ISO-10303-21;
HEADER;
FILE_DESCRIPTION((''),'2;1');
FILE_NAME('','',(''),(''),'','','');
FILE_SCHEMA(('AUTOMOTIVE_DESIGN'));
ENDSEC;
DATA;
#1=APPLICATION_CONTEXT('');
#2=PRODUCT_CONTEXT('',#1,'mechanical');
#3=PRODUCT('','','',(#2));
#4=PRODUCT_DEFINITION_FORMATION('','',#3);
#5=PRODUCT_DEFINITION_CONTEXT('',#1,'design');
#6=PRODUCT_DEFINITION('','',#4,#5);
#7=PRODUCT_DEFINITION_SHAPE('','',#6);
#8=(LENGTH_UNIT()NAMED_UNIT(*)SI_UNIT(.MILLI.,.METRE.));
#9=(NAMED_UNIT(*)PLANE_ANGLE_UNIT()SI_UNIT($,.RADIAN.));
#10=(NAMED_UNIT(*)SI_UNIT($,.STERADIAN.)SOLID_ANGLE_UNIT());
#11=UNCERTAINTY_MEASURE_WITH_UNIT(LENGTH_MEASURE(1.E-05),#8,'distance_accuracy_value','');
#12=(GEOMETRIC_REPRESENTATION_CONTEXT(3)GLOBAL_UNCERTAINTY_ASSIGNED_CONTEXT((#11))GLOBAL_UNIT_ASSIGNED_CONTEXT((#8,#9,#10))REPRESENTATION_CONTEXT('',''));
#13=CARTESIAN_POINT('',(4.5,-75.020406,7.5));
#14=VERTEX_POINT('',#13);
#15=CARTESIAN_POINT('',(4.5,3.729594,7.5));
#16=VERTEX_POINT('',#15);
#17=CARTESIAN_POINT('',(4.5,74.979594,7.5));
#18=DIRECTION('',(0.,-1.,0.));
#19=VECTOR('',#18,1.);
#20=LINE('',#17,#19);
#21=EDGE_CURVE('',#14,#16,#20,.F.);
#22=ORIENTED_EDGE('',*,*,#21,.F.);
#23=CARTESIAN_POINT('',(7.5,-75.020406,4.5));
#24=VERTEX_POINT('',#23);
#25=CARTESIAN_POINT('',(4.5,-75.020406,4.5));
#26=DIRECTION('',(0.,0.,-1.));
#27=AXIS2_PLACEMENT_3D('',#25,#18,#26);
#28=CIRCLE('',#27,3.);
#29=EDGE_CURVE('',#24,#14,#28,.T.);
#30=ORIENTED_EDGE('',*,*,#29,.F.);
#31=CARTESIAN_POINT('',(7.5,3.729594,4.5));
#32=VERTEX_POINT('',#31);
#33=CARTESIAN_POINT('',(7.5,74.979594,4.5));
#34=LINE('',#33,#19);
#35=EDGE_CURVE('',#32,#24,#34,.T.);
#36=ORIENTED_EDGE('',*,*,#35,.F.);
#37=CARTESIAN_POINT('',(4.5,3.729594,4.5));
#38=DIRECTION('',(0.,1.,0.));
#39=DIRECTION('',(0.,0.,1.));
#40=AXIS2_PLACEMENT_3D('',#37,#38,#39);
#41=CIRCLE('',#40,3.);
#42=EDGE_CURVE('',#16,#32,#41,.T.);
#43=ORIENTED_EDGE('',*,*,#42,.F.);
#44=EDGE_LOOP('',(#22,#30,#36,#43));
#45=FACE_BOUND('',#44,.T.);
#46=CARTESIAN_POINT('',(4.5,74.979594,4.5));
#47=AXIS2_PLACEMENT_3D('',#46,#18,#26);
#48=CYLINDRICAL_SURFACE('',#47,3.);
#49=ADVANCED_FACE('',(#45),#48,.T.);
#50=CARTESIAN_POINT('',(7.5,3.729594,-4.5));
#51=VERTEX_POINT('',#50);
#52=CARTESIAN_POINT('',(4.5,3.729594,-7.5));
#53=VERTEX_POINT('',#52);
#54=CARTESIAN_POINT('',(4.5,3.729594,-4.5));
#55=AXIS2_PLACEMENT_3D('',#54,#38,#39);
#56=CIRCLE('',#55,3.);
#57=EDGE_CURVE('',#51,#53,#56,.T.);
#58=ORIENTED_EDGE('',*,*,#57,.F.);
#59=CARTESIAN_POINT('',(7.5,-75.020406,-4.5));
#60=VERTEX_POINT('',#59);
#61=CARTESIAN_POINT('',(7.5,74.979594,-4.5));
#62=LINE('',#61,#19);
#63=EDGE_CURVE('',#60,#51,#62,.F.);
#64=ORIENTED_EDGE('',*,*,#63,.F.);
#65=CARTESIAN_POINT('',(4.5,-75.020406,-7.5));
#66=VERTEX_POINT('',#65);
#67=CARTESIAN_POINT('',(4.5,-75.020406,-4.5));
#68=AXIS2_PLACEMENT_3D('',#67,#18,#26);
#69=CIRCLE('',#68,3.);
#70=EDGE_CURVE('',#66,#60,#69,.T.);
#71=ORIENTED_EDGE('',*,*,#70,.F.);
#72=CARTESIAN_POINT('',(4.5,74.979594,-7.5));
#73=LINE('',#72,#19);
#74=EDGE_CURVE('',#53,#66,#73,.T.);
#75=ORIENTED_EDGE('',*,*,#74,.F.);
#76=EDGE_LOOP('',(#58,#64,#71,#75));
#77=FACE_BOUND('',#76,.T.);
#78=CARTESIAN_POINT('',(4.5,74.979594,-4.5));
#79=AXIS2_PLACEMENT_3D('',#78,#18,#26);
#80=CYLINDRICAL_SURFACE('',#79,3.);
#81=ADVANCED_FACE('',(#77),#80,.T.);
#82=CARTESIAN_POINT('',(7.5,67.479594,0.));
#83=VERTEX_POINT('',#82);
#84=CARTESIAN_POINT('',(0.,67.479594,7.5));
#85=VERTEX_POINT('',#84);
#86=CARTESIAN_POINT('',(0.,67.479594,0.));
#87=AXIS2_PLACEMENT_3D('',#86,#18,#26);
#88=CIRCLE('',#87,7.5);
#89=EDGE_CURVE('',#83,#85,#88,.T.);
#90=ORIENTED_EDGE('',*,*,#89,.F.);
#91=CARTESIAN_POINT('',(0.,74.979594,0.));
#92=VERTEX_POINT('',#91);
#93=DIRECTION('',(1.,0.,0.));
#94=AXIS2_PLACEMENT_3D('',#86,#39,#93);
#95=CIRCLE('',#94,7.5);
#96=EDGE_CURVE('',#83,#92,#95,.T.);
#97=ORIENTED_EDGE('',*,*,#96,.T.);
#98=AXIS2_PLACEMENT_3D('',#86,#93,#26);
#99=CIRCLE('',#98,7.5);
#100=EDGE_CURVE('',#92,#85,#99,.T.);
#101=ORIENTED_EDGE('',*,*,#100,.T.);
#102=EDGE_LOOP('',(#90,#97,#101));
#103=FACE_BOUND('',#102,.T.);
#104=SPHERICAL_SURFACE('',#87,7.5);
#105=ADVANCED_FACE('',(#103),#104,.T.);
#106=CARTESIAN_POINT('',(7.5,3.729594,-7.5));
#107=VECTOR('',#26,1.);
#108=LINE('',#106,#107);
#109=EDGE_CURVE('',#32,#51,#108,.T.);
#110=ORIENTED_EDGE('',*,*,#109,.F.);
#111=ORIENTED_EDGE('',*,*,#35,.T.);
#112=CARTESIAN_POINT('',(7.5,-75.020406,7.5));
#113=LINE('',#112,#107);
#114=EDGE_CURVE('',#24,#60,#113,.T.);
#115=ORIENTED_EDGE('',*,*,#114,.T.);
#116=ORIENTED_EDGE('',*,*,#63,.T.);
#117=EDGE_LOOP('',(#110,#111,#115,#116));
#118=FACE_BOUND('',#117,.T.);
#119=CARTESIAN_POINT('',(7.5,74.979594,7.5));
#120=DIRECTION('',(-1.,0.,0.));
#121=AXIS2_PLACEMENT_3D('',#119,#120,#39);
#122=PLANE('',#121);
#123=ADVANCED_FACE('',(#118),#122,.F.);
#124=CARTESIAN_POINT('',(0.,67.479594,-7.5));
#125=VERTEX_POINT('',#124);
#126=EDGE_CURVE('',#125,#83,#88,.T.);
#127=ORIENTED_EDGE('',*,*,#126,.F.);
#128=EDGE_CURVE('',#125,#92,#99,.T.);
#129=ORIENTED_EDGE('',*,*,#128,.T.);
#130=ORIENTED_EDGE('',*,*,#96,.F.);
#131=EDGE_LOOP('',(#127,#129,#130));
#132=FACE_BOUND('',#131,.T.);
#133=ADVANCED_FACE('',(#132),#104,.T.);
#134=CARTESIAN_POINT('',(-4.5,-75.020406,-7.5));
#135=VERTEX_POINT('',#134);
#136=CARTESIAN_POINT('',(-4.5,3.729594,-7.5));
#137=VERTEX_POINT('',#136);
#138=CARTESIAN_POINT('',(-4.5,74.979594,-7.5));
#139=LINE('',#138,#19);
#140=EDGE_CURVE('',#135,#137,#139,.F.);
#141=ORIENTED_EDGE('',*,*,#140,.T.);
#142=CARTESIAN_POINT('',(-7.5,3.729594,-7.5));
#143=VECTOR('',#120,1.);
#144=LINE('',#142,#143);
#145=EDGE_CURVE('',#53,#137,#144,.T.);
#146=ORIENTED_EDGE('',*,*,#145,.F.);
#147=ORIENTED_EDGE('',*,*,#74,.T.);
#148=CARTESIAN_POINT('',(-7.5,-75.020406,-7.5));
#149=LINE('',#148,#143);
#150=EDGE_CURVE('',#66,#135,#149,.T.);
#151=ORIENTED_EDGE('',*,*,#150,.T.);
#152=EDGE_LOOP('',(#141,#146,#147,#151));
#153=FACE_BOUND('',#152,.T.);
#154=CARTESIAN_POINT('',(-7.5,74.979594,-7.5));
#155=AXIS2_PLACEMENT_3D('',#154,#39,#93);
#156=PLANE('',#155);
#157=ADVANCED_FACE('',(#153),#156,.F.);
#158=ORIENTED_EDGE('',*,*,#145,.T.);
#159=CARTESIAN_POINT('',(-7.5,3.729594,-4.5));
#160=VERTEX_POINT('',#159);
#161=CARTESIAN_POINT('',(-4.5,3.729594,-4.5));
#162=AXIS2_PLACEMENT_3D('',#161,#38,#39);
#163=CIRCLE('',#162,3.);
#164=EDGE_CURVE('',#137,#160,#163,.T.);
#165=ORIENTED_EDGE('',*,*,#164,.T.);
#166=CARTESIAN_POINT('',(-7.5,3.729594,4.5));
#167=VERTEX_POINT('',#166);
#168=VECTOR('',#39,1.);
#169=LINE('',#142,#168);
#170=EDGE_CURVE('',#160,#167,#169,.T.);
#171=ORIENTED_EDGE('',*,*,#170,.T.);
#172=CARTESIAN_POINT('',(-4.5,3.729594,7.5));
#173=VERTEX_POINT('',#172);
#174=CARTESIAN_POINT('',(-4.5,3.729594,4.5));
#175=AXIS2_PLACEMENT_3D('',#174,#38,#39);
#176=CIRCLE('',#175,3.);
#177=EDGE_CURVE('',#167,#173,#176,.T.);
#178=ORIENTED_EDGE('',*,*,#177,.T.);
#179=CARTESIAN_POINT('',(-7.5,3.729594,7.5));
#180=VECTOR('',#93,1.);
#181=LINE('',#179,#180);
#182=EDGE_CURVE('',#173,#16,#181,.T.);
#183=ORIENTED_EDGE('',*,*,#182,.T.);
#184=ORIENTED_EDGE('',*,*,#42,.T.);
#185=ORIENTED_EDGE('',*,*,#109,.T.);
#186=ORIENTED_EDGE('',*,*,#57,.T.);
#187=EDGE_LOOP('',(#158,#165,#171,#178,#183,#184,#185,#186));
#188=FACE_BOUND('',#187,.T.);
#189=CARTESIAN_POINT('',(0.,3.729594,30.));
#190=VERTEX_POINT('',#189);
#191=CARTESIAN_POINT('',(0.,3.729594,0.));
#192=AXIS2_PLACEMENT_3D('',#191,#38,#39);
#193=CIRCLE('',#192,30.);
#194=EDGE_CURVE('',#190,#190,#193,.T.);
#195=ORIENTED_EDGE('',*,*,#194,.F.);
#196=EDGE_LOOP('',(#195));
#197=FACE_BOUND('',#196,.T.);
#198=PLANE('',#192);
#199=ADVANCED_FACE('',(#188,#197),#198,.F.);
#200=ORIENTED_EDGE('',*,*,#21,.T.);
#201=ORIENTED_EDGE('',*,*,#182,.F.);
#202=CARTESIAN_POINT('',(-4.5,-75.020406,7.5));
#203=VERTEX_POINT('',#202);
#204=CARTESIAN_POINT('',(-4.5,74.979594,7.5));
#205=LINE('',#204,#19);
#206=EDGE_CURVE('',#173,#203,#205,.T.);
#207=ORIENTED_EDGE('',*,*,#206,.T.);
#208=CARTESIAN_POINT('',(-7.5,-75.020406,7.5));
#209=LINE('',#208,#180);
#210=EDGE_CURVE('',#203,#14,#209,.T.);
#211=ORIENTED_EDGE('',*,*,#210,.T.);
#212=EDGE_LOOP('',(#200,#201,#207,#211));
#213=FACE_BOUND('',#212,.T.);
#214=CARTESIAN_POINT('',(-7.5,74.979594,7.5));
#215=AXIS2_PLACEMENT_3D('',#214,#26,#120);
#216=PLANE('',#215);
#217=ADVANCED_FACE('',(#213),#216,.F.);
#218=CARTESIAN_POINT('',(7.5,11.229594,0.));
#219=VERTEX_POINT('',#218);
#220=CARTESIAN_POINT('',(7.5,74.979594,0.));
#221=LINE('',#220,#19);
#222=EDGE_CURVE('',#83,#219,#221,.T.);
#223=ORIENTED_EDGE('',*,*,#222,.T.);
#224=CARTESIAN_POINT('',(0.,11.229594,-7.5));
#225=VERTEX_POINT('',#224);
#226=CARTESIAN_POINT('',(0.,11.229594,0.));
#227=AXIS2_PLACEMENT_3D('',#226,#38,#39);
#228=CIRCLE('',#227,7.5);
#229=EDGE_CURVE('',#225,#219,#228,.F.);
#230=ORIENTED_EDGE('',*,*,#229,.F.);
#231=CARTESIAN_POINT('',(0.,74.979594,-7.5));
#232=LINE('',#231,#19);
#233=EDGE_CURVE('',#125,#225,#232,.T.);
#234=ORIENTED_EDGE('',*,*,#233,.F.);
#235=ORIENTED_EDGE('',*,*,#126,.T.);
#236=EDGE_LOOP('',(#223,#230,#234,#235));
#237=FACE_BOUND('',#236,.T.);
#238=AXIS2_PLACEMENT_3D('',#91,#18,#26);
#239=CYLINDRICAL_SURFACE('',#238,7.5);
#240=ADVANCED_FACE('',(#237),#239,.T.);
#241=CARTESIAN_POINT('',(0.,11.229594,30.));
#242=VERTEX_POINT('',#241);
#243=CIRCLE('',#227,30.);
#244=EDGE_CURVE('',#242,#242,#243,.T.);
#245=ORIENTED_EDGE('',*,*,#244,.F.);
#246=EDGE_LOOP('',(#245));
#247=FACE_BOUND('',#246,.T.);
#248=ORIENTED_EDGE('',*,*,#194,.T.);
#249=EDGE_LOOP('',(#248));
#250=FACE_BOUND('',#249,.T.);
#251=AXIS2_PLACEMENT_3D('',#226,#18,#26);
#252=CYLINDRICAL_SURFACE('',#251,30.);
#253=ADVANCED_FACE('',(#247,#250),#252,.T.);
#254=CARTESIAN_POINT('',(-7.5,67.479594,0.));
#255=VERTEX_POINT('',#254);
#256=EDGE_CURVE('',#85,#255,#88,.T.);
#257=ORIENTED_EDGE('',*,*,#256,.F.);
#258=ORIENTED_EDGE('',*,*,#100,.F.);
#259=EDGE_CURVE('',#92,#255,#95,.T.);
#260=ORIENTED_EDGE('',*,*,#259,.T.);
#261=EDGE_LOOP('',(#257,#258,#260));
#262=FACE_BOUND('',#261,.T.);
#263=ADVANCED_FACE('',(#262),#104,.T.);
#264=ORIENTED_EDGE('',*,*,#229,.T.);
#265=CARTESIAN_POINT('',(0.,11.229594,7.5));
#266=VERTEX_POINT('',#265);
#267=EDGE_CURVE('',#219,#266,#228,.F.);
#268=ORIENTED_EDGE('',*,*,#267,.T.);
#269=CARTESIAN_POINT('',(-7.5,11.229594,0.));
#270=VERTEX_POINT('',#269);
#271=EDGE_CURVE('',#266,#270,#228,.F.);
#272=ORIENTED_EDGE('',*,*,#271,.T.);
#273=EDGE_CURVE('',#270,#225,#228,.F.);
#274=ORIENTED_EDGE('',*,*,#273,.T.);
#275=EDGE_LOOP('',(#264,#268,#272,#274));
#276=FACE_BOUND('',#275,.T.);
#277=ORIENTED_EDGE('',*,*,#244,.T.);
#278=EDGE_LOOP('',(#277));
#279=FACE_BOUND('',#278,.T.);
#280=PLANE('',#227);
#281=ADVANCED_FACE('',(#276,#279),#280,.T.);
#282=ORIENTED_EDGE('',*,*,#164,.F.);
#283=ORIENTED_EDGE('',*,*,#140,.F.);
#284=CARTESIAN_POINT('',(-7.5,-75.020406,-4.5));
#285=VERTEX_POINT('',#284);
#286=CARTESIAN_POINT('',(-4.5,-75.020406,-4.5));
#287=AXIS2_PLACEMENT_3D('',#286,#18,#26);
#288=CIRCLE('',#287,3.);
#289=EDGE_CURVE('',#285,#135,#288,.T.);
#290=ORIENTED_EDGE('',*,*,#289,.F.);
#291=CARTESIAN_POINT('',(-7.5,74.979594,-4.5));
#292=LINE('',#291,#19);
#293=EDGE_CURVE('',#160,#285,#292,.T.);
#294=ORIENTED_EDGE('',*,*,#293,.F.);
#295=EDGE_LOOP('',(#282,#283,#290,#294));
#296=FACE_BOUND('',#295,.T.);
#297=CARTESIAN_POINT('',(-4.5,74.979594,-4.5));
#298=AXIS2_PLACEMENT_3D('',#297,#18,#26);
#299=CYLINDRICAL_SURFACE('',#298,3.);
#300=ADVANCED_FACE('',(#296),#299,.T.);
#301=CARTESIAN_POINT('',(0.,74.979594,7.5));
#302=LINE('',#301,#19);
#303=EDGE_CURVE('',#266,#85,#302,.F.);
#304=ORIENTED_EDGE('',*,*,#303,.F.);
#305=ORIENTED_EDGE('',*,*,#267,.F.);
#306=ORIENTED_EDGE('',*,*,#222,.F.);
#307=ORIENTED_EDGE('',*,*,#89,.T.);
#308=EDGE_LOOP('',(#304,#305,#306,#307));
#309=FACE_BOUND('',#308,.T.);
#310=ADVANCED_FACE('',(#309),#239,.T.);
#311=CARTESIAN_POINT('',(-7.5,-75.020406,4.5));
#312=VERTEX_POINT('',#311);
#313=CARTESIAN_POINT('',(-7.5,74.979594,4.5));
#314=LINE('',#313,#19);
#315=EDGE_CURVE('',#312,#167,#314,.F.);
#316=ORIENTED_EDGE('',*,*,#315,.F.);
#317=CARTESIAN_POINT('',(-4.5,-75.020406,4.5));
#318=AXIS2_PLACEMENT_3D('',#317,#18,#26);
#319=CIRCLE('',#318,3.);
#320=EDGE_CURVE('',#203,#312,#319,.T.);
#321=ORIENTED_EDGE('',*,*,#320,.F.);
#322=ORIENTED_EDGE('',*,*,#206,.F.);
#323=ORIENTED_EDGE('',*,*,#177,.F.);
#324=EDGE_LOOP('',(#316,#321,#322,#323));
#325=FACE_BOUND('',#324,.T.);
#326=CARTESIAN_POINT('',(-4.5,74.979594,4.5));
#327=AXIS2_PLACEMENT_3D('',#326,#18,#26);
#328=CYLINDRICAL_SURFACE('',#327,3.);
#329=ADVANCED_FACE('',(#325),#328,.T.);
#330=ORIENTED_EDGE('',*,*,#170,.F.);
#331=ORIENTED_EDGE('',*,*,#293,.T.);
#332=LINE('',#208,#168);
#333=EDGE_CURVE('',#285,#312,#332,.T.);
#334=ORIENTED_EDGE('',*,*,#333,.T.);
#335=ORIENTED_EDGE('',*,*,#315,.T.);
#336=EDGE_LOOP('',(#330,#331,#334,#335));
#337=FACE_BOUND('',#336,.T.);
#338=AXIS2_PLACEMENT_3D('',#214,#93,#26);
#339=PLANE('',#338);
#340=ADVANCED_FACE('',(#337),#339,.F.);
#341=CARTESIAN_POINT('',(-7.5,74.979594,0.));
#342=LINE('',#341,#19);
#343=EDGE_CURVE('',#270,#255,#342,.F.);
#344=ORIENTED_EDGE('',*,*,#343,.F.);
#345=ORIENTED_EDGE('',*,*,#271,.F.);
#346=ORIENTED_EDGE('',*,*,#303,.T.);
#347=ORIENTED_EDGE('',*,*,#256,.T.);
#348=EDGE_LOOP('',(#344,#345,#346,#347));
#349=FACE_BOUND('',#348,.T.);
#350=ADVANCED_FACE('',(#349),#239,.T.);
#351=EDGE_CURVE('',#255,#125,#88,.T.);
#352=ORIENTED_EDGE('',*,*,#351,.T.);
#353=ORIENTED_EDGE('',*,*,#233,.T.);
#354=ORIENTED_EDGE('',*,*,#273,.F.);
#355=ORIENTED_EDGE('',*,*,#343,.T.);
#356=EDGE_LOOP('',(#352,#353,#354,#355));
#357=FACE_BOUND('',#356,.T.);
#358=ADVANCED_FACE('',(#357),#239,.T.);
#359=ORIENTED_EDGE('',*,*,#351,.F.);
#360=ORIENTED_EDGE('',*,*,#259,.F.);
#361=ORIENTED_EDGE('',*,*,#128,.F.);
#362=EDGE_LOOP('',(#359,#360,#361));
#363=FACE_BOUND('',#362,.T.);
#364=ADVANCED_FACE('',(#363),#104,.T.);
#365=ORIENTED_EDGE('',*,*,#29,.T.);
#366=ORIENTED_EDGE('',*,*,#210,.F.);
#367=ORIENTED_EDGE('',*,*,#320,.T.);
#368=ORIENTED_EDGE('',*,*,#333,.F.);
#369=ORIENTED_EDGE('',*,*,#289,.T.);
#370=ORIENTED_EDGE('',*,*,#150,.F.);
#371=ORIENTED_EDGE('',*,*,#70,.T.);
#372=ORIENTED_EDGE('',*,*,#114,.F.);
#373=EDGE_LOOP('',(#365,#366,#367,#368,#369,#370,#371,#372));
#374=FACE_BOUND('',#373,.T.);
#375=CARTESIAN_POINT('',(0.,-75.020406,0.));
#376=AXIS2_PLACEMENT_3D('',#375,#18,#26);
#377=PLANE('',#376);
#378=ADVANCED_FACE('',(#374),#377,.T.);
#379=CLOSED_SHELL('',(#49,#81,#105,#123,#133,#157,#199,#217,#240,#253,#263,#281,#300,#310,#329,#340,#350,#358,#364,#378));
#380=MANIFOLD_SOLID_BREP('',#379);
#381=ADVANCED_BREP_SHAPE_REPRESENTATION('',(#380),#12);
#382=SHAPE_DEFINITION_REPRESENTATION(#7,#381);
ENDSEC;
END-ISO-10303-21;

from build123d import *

# Parameters (mm, degrees)
SKETCH1_W           = 10
SKETCH1_H           = 10
BOSS_EXTRUDE1_DEPTH = 50
BOSS_EXTRUDE2_START = -45
SKETCH2_R           = 20
BOSS_EXTRUDE2_DEPTH = 2.5
FILLET2_R           = 2
FILLET3_R           = 5
FILLET4_R           = 5
SCALE1_SCALE        = 1.5


with BuildPart() as part:
    # Sketch1 → Boss-Extrude1 (new, symmetric)
    with BuildSketch(Plane(origin=(0, 0, 0), x_dir=(1, 0, 0), z_dir=(0, 1, 0))):
        Rectangle(SKETCH1_W, SKETCH1_H)
    extrude(amount=BOSS_EXTRUDE1_DEPTH, both=True)

    # Sketch2 → Boss-Extrude2 (add, symmetric)
    with BuildSketch(Plane(origin=(0, 50, 0), x_dir=(1, 0, 0), z_dir=(0, 1, 0)).offset(BOSS_EXTRUDE2_START)):
        with Locations(Location((0, 0, 0), (0, 0, 270))):
            Circle(SKETCH2_R)
    extrude(amount=BOSS_EXTRUDE2_DEPTH, both=True)

    # Fillet2
    fillet2_edges = [part.edges().sort_by_distance(p)[0] for p in [
        (5, -23.75, 5),
        (-5, -23.75, 5),
        (-5, -23.75, -5),
        (5, -23.75, -5),
    ]]
    fillet(fillet2_edges, radius=FILLET2_R)

    # Fillet3
    fillet3_edges = [part.edges().sort_by_distance(p)[0] for p in [
        (-5, 28.75, -5),
        (-5, 28.75, 5),
        (5, 28.75, 5),
        (5, 28.75, -5),
    ]]
    fillet(fillet3_edges, radius=FILLET3_R - 0.0001)  # a hair under: the kernel refuses the full size

    # Fillet4
    fillet4_edges = [part.edges().sort_by_distance(p)[0] for p in [
        (3.535563195, 50, -3.535563195),
        (3.535563195, 50, 3.535563195),
        (-3.535563195, 50, 3.535563195),
        (-3.535563195, 50, -3.535563195),
    ]]
    fillet(fillet4_edges, radius=FILLET4_R - 0.0001)  # a hair under: the kernel refuses the full size


with BuildPart() as part_1:
    # Scale1: scaled about (0, 0.040894901, 0)
    add(part.part.scale(SCALE1_SCALE).moved(Location((0, -0.02044745, 0))))


solid = part_1.part
